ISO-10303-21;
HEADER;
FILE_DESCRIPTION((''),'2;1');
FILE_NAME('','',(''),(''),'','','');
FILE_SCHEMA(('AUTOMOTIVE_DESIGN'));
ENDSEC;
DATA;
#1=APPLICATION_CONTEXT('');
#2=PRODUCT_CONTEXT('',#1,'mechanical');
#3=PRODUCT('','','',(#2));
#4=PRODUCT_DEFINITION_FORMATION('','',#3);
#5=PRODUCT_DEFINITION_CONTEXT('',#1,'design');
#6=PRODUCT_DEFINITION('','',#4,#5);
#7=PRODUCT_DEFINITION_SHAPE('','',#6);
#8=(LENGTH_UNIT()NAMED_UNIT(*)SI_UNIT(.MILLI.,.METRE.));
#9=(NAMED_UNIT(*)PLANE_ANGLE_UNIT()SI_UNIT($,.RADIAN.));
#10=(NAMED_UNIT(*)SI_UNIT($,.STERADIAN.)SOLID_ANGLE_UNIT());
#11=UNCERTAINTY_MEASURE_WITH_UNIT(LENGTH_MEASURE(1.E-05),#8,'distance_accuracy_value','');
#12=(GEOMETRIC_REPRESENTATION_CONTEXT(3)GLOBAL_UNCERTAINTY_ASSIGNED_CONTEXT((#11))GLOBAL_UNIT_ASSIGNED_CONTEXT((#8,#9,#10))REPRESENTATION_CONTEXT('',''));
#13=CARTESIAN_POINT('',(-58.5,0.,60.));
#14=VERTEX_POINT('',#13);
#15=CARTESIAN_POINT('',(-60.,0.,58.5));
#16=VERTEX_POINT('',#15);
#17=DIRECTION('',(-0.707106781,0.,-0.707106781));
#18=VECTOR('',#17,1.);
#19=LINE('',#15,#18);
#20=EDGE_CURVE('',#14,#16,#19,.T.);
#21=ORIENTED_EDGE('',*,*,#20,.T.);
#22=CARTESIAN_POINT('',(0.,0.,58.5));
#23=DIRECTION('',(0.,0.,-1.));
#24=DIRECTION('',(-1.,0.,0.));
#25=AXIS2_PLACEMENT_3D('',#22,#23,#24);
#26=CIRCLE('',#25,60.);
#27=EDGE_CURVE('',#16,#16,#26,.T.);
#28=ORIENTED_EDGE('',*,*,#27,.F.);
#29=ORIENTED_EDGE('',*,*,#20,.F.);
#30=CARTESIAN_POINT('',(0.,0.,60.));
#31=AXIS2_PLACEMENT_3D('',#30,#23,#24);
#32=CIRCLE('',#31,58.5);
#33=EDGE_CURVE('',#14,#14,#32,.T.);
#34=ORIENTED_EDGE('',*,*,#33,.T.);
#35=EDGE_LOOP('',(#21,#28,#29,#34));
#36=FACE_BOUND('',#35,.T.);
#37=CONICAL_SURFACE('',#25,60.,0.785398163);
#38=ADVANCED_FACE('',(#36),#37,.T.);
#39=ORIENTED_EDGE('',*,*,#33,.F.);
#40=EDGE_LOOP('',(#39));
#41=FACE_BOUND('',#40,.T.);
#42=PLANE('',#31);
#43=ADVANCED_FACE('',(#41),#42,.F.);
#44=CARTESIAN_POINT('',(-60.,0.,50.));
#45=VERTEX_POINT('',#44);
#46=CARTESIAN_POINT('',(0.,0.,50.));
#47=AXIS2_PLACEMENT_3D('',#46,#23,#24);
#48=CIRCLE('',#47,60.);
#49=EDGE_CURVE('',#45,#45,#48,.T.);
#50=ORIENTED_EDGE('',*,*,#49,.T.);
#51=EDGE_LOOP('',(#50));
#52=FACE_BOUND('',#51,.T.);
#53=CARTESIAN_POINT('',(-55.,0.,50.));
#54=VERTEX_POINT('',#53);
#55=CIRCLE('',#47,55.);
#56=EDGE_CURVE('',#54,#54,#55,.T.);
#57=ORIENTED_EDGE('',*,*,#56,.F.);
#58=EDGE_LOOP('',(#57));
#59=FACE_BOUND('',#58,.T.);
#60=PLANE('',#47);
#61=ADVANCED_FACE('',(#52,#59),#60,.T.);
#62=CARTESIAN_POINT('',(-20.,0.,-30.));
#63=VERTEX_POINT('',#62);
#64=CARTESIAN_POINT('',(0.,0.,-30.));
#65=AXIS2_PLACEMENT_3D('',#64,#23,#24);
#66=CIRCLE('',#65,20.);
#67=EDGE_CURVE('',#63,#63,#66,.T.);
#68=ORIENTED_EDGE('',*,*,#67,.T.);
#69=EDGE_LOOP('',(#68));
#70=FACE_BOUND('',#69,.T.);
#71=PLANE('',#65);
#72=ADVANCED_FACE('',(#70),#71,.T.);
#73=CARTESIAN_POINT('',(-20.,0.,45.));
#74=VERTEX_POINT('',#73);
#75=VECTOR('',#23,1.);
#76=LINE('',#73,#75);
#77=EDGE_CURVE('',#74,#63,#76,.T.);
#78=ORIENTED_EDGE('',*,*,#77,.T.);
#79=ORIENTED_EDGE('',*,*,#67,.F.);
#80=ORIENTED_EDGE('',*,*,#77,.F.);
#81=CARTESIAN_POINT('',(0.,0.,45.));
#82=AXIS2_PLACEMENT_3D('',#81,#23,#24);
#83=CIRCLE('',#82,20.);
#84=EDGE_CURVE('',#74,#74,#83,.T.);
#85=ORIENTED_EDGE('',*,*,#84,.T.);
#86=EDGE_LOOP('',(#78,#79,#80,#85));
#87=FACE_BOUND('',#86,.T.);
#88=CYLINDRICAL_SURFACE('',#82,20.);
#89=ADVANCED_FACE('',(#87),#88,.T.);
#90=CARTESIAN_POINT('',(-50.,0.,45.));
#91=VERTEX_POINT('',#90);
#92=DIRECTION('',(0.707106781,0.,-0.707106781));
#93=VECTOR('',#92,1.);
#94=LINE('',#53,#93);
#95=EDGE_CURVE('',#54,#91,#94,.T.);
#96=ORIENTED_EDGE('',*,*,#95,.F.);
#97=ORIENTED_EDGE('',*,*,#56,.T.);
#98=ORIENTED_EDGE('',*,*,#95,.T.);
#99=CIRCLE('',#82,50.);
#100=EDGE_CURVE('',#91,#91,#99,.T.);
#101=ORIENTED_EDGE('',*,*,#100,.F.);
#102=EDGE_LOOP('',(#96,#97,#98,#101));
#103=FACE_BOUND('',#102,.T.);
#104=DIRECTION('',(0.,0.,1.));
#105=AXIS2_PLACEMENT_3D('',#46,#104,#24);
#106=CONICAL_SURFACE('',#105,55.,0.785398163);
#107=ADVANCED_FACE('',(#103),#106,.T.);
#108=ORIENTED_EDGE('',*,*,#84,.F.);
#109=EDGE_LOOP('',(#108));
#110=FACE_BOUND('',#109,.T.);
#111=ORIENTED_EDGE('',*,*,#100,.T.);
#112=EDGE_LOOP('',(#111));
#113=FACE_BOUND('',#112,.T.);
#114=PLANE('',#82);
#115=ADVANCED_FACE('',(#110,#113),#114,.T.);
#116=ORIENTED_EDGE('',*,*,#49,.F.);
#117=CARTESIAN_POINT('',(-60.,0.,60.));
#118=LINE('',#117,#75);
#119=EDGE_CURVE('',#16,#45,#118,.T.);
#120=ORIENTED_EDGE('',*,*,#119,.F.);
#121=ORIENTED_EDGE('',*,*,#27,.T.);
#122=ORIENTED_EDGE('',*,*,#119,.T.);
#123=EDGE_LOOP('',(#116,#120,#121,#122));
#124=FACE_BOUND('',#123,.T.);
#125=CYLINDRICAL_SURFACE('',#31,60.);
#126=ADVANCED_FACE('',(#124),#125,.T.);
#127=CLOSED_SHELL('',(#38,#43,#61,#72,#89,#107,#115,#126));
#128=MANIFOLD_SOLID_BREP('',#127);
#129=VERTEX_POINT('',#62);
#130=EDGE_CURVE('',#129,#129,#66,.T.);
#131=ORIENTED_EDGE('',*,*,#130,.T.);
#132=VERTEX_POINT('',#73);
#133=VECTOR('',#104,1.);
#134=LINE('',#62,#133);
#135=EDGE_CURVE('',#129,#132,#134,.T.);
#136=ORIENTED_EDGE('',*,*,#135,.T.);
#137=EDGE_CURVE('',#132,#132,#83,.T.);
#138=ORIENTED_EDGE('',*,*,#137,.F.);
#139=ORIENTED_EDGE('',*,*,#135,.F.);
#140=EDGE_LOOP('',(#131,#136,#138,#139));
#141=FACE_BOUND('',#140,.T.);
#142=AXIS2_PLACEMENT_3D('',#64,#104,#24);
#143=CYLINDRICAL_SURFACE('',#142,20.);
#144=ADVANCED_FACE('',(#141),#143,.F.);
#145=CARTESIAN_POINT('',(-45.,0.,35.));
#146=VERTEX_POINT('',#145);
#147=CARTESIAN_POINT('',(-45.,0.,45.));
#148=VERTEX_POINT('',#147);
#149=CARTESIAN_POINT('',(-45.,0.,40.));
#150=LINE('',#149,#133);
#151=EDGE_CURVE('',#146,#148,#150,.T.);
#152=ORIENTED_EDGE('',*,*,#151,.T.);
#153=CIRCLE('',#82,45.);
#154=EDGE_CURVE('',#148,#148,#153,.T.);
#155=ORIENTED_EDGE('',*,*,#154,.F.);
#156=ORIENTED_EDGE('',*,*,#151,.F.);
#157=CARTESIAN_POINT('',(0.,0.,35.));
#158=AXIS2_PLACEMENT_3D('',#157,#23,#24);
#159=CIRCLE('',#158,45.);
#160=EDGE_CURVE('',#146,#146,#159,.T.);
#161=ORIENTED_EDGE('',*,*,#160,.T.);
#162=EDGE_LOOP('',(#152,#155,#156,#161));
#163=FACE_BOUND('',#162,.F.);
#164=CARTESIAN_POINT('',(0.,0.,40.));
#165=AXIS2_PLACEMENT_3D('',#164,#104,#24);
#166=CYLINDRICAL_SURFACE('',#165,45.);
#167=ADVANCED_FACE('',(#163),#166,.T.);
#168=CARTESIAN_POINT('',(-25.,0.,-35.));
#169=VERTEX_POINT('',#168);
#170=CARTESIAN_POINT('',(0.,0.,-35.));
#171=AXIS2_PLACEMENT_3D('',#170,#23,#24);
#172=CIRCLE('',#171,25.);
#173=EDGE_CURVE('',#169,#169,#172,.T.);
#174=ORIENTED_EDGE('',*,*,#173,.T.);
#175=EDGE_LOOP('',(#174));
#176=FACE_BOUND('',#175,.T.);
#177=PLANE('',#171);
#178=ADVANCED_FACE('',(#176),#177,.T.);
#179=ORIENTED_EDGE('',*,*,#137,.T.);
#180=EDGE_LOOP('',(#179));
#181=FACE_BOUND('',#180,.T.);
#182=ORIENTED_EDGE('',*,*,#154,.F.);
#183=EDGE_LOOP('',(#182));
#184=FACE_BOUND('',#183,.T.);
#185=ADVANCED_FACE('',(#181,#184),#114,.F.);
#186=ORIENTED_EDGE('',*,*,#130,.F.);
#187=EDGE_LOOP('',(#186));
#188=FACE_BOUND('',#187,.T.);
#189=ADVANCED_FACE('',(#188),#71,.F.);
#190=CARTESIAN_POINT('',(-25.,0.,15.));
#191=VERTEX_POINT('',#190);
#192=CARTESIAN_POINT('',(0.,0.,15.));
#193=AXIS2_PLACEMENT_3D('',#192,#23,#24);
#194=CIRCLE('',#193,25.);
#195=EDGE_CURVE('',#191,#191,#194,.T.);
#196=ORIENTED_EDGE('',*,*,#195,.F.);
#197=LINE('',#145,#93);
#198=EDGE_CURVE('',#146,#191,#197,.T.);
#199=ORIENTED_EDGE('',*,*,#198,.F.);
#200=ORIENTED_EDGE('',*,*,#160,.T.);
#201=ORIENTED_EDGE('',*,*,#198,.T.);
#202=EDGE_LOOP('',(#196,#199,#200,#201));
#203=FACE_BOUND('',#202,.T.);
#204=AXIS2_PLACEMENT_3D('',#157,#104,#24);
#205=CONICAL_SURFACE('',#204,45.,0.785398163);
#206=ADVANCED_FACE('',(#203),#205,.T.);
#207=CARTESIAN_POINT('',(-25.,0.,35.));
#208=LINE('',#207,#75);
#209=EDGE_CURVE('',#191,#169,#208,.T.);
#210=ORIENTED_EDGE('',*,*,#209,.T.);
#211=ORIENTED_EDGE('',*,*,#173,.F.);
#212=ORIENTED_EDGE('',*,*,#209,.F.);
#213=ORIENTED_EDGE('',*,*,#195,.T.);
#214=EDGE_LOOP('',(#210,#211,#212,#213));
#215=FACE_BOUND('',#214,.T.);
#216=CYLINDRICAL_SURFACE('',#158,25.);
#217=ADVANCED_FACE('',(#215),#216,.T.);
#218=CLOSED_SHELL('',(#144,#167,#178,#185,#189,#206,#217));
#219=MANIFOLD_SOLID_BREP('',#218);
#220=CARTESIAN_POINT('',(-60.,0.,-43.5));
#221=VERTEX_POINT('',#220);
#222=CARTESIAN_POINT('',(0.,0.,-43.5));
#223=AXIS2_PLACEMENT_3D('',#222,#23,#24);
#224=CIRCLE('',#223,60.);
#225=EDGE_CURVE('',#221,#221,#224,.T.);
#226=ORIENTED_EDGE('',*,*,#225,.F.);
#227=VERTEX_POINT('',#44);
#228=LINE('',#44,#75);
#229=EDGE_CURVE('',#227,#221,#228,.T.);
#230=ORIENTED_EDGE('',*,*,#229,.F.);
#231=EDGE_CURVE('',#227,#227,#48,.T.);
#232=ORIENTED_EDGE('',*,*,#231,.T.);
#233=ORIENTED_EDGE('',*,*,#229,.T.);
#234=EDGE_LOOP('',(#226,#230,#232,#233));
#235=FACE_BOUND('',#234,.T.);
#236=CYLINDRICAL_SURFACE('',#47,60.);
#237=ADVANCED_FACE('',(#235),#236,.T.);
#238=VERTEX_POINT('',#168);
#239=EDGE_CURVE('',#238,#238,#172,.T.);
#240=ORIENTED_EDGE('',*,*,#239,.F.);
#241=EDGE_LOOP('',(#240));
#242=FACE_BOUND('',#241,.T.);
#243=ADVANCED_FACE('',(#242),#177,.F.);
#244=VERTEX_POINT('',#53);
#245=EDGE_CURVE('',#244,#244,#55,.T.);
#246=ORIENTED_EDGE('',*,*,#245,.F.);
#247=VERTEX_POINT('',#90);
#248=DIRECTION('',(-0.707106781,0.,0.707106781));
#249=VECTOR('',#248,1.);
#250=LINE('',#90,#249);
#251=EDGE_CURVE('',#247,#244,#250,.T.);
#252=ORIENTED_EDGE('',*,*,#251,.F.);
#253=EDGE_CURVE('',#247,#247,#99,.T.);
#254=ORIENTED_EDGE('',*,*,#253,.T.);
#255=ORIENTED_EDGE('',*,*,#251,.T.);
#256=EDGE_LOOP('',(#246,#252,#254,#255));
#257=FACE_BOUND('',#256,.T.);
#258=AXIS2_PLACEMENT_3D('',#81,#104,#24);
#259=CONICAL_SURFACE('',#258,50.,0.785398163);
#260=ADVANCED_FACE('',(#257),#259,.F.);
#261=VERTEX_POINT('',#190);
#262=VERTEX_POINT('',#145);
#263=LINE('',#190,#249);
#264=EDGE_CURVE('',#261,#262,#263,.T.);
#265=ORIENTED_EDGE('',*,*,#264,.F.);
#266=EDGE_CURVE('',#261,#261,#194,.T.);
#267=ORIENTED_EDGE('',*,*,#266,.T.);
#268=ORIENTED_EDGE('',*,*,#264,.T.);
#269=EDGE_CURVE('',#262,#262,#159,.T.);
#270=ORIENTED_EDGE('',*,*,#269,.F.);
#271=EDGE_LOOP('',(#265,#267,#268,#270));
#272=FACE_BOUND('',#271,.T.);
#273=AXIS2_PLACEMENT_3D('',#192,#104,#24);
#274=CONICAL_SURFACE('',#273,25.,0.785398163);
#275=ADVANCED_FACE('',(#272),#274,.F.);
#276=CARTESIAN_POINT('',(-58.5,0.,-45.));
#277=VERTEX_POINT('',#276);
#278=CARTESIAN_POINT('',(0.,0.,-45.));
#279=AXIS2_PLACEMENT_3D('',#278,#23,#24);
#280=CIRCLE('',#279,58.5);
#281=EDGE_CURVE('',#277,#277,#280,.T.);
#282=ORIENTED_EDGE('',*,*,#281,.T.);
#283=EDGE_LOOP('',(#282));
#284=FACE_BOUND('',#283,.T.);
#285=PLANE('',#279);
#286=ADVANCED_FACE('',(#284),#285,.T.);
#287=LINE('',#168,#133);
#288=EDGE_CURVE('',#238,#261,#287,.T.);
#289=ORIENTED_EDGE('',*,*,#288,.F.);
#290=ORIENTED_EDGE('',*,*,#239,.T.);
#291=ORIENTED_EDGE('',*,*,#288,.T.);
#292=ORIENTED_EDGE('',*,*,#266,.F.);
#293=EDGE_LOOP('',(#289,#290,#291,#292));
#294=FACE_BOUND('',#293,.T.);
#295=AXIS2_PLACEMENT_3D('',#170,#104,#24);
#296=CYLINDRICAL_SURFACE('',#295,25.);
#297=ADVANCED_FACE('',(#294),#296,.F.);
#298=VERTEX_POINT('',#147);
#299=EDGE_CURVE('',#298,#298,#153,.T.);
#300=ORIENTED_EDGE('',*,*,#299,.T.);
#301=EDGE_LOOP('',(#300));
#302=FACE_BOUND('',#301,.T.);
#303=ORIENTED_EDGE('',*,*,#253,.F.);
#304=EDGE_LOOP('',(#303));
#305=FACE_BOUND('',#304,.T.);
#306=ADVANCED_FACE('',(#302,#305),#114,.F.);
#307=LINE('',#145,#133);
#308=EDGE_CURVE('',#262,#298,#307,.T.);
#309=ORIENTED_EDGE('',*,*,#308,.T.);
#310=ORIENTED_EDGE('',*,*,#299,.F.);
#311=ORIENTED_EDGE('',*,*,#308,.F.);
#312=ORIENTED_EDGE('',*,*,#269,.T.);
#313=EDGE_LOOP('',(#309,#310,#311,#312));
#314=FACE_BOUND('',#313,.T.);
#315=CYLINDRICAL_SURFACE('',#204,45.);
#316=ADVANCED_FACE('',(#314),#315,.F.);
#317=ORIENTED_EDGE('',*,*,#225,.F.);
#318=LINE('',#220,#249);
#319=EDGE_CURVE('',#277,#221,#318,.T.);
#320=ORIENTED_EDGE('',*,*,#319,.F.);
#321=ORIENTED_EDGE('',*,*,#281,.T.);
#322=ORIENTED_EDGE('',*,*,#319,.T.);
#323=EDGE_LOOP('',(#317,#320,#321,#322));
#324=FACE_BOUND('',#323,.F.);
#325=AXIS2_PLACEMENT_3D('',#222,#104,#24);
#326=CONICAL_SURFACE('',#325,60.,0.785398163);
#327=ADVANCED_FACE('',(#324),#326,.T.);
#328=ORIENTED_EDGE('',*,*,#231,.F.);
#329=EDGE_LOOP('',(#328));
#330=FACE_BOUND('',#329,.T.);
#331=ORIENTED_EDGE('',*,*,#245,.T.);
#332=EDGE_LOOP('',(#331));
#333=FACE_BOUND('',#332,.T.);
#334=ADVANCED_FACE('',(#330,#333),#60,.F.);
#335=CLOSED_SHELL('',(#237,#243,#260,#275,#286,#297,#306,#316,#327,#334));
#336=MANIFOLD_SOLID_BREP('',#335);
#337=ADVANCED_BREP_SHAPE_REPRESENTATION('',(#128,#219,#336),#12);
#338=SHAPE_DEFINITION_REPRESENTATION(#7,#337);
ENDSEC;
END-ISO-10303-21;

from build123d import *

# Parameters (mm, degrees)
F0_W    = 20
F0_H    = 10
F0_W_2  = 5
F4_SIZE = 1.5
F5_SIZE = 1.5


# Not quite as in the source:
# - a feature names something its author has since deleted; it is built from what else it names


with BuildPart() as f1:
    # F0 (on Front) → F1 (revolve)
    with BuildSketch(Plane.XZ):
        Polygon((-60, 45), (-60, 35), (-45, 35), (-45, 45), (-50, 45), align=None)
        Polygon((-60, -45), (0, -45), (0, -35), (-25, -35), (-25, 15), (-45, 35), (-60, 35), align=None)
        Polygon((-55, 50), (-60, 50), (-60, 45), (-50, 45), align=None)
    revolve(axis=Axis((0, 0, 13.6922076344), (0, 0, -1)))

    # F5
    f5_edges = [f1.edges().sort_by_distance(p)[0] for p in [
        (60, 0, -45),
    ]]
    chamfer(f5_edges, length=F5_SIZE)


with BuildPart() as f2:
    # F0 (on Front) → F2 (revolve)
    with BuildSketch(Plane.XZ):
        Polygon((0, -30), (0, 35), (-20, 35), (-20, 30), (-20, -30), align=None)
        with Locations((-10, 40)):
            Rectangle(F0_W, F0_H)
        Polygon((0, 45), (0, 60), (-60, 60), (-60, 50), (-55, 50), (-50, 45), (-45, 45), (-25, 45), (-20, 45), align=None)
    revolve(axis=Axis((0, 0, 13.6922076344), (0, 0, -1)))

    # F4
    f4_edges = [f2.edges().sort_by_distance(p)[0] for p in [
        (60, 0, 60),
    ]]
    chamfer(f4_edges, length=F4_SIZE)


with BuildPart() as f3:
    # F0 (on Front) → F3 (revolve)
    with BuildSketch(Plane.XZ):
        with Locations((-35, 40)):
            Rectangle(F0_W, F0_H)
        with Locations((-22.5, 40)):
            Rectangle(F0_W_2, F0_H)
        Polygon((-25, -35), (0, -35), (0, -30), (-20, -30), (-20, 30), (-20, 35), (-25, 35), (-25, 15), align=None)
        Polygon((-25, 35), (-45, 35), (-25, 15), align=None)
    revolve(axis=Axis((0, 0, 13.6922076344), (0, 0, -1)))


solid = Compound([f1.part, f2.part, f3.part])
